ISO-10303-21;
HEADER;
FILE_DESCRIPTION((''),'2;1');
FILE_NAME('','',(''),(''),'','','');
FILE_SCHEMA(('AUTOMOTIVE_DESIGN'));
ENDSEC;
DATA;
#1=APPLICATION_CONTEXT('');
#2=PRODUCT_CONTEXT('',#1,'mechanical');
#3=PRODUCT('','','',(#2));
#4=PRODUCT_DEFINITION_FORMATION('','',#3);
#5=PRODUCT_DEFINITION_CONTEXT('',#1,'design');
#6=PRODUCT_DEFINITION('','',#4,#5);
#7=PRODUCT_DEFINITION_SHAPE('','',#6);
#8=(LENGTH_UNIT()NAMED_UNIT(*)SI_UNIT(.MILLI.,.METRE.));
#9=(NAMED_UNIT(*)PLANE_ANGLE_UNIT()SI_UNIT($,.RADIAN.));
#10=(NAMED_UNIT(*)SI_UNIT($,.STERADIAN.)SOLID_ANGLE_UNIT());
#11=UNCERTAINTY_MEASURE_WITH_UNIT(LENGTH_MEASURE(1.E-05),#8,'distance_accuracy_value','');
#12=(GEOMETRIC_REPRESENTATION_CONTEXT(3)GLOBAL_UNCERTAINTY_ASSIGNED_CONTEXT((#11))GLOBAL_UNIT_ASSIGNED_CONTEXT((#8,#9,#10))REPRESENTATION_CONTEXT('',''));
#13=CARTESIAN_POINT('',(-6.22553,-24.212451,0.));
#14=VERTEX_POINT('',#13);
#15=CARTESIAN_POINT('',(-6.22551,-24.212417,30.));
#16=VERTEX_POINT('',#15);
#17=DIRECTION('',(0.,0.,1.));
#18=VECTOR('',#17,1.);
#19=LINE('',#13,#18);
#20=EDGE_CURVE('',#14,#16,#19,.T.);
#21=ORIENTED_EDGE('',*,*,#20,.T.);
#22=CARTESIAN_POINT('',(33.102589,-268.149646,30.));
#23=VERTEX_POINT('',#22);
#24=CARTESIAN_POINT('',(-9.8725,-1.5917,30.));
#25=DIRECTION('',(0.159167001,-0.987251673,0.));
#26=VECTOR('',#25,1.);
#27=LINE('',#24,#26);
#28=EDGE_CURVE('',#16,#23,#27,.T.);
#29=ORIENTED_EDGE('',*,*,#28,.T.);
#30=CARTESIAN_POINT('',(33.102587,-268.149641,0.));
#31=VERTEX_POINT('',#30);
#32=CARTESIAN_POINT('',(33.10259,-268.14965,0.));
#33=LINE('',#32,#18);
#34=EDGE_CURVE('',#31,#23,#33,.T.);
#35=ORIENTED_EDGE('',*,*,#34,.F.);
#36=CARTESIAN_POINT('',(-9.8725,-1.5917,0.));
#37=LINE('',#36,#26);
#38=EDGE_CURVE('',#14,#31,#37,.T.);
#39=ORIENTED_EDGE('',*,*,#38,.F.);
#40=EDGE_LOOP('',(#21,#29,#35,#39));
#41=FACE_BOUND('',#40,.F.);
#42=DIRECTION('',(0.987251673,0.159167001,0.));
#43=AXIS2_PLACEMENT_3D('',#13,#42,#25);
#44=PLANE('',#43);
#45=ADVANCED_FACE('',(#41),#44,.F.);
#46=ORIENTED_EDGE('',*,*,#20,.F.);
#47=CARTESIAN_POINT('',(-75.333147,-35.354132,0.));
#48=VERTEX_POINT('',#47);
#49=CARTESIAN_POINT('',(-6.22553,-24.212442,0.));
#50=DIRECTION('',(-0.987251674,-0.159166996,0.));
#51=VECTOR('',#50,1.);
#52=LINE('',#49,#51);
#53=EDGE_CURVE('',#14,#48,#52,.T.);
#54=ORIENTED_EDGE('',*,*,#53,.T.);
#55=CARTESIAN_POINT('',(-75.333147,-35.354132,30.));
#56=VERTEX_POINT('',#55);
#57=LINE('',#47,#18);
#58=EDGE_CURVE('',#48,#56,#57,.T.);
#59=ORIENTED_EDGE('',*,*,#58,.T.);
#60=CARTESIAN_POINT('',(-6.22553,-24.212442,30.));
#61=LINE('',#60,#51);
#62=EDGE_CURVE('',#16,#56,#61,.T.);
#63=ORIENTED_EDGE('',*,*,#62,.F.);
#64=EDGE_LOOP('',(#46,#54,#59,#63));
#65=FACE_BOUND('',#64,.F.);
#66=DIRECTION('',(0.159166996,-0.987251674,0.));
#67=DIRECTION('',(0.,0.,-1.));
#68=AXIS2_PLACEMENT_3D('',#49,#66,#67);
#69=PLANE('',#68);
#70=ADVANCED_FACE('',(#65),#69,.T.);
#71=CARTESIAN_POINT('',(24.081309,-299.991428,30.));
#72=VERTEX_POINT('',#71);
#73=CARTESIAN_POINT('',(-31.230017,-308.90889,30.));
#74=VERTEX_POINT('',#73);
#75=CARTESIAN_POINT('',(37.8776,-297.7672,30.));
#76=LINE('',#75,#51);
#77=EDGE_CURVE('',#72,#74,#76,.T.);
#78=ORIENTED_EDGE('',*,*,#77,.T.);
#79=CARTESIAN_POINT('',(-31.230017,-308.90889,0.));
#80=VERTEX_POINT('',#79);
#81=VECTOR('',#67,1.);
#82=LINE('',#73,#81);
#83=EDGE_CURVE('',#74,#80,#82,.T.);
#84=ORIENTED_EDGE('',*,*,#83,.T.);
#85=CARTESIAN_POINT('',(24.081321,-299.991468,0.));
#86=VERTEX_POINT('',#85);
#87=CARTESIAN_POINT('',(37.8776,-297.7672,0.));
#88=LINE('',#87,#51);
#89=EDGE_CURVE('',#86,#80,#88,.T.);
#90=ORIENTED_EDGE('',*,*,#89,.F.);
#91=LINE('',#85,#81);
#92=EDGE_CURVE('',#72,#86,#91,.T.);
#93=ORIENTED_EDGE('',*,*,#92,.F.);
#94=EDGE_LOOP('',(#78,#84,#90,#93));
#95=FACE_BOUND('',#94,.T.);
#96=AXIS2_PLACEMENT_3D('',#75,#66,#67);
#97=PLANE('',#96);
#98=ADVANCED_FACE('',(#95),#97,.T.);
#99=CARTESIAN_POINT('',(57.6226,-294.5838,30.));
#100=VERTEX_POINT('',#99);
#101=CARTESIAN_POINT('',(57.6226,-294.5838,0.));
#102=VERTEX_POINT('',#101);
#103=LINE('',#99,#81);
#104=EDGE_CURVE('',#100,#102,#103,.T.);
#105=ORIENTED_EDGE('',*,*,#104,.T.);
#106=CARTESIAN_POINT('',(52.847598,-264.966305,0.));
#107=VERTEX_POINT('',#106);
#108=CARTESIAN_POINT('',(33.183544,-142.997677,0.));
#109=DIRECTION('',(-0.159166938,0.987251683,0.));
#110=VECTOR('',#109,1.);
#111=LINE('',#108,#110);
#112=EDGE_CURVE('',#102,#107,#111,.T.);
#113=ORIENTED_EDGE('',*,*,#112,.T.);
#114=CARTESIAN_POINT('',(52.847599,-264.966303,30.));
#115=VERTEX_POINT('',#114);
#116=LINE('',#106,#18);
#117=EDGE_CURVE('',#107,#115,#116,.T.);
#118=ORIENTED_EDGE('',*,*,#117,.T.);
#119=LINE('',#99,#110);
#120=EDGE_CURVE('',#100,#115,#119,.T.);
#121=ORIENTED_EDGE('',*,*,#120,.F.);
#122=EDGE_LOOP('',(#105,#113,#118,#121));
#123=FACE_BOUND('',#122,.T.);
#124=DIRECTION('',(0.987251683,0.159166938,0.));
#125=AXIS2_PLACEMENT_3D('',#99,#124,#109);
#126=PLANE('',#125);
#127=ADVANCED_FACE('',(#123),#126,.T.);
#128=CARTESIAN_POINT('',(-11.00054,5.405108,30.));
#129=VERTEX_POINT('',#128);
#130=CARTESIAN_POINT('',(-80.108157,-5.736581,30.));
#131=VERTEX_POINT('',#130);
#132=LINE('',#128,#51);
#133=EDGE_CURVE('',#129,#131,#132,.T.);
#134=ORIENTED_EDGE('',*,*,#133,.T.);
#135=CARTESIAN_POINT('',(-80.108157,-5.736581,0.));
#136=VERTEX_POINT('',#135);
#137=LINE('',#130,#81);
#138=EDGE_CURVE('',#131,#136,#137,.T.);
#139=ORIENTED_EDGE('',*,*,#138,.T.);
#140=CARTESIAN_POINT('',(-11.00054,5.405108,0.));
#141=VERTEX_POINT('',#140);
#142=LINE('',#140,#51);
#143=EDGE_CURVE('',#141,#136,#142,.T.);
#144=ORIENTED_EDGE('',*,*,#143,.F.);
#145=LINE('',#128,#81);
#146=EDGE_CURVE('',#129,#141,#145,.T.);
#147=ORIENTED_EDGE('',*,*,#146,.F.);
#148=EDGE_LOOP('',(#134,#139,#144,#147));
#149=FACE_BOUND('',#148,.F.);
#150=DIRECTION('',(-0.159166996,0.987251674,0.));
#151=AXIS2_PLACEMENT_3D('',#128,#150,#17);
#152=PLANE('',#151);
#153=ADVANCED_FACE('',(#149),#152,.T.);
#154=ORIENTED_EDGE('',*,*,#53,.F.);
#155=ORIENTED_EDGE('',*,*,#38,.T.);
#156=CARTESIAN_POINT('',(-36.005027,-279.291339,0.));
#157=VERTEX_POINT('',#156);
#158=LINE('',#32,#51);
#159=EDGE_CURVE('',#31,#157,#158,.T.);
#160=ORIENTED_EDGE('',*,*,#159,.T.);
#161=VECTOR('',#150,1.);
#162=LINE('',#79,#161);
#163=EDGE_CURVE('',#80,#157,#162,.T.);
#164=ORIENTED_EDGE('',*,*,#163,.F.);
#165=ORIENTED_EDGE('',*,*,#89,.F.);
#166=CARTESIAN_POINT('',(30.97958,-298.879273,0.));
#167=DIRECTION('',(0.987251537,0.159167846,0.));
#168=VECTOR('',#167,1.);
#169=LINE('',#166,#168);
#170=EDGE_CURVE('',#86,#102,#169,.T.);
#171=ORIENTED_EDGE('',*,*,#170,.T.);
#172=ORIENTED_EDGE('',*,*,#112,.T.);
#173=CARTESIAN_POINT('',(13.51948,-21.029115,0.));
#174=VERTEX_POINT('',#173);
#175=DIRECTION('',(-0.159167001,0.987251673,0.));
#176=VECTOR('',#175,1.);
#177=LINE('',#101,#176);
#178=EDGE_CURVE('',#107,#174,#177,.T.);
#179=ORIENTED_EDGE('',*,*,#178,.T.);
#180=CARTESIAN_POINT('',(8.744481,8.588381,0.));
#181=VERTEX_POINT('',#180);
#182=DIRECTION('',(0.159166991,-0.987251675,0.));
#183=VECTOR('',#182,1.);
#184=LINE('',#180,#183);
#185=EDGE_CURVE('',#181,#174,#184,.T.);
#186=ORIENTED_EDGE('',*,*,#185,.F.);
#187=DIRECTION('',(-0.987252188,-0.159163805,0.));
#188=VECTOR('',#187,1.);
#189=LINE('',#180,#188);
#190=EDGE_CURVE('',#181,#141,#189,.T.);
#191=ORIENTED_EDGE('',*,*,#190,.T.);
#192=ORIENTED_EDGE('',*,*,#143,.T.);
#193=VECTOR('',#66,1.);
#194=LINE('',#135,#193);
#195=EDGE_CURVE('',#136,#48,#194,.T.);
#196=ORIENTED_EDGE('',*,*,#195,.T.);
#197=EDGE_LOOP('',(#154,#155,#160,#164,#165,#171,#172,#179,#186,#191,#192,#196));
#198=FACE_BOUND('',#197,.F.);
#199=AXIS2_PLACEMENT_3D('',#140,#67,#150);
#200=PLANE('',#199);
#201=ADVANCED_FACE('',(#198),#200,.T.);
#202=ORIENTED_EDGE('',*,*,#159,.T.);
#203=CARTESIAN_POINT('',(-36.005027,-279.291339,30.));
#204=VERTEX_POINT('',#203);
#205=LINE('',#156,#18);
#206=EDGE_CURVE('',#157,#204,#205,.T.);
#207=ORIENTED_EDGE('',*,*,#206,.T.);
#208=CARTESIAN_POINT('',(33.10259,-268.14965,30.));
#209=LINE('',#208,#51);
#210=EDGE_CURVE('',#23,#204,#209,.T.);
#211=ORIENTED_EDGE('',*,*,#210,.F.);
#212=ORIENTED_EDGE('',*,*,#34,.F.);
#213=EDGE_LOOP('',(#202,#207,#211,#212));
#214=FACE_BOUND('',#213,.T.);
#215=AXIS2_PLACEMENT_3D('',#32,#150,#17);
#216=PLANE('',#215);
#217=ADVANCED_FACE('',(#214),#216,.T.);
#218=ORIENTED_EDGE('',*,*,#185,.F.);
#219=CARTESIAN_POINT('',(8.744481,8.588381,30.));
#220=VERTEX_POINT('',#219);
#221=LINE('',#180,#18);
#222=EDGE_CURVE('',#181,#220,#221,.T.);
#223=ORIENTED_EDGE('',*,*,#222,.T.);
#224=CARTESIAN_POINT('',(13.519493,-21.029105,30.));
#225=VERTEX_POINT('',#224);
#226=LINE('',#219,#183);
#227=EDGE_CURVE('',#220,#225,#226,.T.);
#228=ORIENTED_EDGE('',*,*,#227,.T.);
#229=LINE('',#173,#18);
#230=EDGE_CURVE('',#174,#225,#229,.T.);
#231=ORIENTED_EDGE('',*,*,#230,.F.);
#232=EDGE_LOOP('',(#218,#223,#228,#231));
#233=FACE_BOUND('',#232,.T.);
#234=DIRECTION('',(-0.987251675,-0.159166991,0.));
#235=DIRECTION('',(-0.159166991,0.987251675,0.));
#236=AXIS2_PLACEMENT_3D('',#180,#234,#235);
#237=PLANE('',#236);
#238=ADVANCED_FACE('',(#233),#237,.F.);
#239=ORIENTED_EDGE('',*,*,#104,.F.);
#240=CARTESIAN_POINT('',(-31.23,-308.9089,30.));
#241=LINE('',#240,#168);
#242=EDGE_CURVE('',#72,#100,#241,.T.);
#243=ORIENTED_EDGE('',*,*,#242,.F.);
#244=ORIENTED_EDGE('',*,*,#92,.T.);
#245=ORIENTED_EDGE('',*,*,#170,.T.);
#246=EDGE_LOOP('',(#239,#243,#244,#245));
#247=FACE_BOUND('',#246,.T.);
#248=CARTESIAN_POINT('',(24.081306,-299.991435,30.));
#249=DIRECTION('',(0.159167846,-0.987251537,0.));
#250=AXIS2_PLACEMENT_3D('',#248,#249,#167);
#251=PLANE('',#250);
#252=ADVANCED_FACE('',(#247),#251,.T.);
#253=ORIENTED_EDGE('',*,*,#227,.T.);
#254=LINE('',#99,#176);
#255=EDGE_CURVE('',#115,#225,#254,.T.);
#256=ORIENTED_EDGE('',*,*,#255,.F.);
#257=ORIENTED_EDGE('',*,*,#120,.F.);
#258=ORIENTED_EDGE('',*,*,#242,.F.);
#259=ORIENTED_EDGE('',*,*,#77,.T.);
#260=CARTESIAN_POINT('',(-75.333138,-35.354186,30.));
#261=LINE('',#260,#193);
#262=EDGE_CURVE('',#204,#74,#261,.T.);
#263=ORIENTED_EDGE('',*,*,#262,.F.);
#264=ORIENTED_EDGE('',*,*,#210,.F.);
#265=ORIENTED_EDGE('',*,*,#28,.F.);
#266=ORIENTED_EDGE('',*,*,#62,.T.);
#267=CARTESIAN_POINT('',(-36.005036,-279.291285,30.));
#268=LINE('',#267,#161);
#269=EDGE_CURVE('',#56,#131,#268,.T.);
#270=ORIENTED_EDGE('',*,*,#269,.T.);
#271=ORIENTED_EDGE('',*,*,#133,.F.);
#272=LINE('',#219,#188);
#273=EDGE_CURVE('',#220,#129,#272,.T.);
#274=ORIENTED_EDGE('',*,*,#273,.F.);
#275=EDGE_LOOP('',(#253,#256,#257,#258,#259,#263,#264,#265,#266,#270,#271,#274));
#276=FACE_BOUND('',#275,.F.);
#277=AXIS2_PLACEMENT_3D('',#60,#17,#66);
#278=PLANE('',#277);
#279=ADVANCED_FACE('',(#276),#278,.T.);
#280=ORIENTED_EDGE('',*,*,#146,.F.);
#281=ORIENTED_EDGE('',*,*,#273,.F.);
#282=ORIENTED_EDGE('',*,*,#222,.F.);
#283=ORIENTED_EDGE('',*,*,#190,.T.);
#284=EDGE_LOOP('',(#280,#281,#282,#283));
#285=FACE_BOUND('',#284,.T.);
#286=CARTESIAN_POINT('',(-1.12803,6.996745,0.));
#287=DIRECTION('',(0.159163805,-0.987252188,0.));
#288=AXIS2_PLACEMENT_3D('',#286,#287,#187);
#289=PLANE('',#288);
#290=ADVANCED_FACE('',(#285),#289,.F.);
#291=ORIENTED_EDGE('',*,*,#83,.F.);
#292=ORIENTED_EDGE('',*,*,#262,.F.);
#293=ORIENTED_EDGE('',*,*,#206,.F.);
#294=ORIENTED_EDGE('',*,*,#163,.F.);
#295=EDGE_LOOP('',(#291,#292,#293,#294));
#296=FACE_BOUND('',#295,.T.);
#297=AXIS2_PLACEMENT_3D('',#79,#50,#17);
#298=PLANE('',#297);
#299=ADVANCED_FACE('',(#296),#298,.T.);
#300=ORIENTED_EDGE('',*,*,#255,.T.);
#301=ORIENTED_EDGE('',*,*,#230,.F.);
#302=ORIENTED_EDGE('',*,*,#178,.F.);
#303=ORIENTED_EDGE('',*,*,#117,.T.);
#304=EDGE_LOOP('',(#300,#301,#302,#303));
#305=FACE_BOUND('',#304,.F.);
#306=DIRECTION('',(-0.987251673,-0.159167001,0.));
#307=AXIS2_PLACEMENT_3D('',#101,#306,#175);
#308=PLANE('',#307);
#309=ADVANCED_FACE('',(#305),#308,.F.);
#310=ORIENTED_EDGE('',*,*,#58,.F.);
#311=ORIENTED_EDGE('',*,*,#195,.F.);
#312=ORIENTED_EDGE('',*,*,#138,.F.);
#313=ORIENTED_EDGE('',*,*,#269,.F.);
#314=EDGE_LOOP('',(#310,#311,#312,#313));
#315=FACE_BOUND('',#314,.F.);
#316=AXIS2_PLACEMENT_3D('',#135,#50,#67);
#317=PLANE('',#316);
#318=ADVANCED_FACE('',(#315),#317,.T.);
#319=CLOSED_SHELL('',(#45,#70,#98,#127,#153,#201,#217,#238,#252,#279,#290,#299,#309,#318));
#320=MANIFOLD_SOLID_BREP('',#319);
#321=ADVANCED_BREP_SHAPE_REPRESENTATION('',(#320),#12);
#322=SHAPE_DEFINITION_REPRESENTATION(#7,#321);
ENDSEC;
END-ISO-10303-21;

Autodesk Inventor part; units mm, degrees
ref_plane "YZ Plane" through (0, 0, 0) normal (1, 0, 0) x (0, 1, 0)
ref_plane "XZ Plane" through (0, 0, 0) normal (0, 1, 0) x (-1, 0, 0)
ref_plane "XY Plane" through (0, 0, 0) normal (0, 0, 1) x (1, 0, 0)
sketch "Sketch1" plane through (0, 0, 0) normal (0, 0, 1) x (1, 0, 0)
  arc A0 (5.5018, -3.1706) -> (4.1426, 4.8126) centre (0, 0) ccw projected
  line L0 (-0.2789, 17.1872) -> (4.1426, 4.8126) projected
  arc A1 (-0.2789, 17.1872) -> (-5.4243, 16.3111) centre (-2.7743, 16.2955) ccw projected
  line L1 (-5.5018, 3.1706) -> (-5.4243, 16.3111) projected
  arc A2 (-5.5018, 3.1706) -> (-4.1426, -4.8126) centre (0, 0) ccw projected
  line L2 (-4.1426, -4.8126) -> (0.2789, -17.1872) projected
  arc A3 (0.2789, -17.1872) -> (5.4243, -16.3111) centre (2.7743, -16.2955) ccw projected
  line L3 (5.4243, -16.3111) -> (5.5018, -3.1706) projected
  circle A4 centre (1.7673, -10.3806) radius 0.5 projected
  circle A5 centre (1.2638, -7.4232) radius 0.5 projected
  circle A6 centre (0, 0) radius 4.375 projected
  circle A7 centre (-2.2708, 13.3381) radius 0.5 projected
  circle A8 centre (-1.7673, 10.3806) radius 0.5 projected
  circle A9 centre (-1.2638, 7.4232) radius 0.5 projected
  circle A10 centre (-2.7743, 16.2955) radius 0.5 projected
  circle A11 centre (2.2708, -13.3381) radius 0.5 projected
  circle A12 centre (2.7743, -16.2955) radius 0.5 projected
  line L4 (0, 0) -> (2.7743, -16.2955)
  line L5 (0, 0) -> (47.7501, -296.1755)
  line L6 (0, 0) -> (23.8751, -148.0877)
  line L7 (-9.8725, -1.5917) -> (37.8776, -297.7672)
  line L8 (37.8776, -297.7672) -> (57.6226, -294.5838)
  line L9 (57.6226, -294.5838) -> (9.8725, 1.5917)
  line L10 (9.8725, 1.5917) -> (-9.8725, -1.5917)
  line L11 (-9.8725, -1.5917) -> (57.6226, -294.5838) construction
  line L12 (37.8776, -297.7672) -> (9.8725, 1.5917) construction
  circle A13 centre (0, 0) radius 25
  point P0 (13.5195, -21.0291)
  point P1 (-6.2255, -24.2124)
  dimension "d0" = 300
  dimension "d1" = 150
  dimension "d2" = 20
  dimension "d3" = 50
extrude "Extrusion1" add sketch "Sketch1" along normal blind 30 contours L3 A3 L5 A12 L4 A11 A4 A5 A6 L10 A0 | A0 L10 L9 A13 L5 A3 L3 | L10 A6 A2 L1 A1 L0 A0 | A0 L0 A1 L1 A2 L10 L7 A13 L9 | L10 A6 | A6 L4 L10 | L5 A13 L7 L10 A2 L2 A3 | A3 L2 A2 L10 A6 L5 A5 A4 A11 A12 | L9 L8 L5 A13 | L10 L5 A6 | L4 A6 L5 | L5 A12 | A12 L5 | L5 L8 L7 A13 | L4 A5 L5 A6 | L5 A11 L4 A12 | L4 A5 L5 | A5 L4 | L5 A5 | L5 A11 L4 | A11 L5 | L4 A4 L5 A5 | L4 A11 | L5 A4 L4 A11 | L4 A4 L5 | A4 L4 | L5 A4 | A7 | A8 | A9 | A10
sketch "Sketch2" plane through (37.8776, -297.7672, 0) normal (-0.9872517, -0.159167, 0) x (0, 0, 1)
  line L0 (30, 277.0871) -> (30, 0) projected
  line L1 (30, 0) -> (0, 0)
  line L2 (0, 0) -> (0, 30)
  line L3 (0, 30) -> (30, 30)
  line L4 (30, 30) -> (30, 0)
  point P0 (0, 300)
  point P1 (30, 30)
  dimension "d6" = 30
  dimension "d7" = 30
extrude "Extrusion2" add sketch "Sketch2" along normal blind 70
sketch "Sketch4" plane through (0, 0, 30) normal (0, 0, 1) x (1, 0, 0)
  line L0 (-6.2255, -24.2124) -> (33.1026, -268.1496) projected
  line L1 (33.1026, -268.1496) -> (-36.005, -279.2913) projected
  line L2 (-31.23, -308.9089) -> (-36.005, -279.2913) projected
  line L3 (57.6226, -294.5838) -> (-31.23, -308.9089) projected
  line L4 (57.6226, -294.5838) -> (13.5195, -21.0291) projected
  arc A0 (13.5195, -21.0291) -> (-6.2255, -24.2124) centre (0, 0) ccw projected
  arc A1 (13.5195, -21.0291) -> (-6.2255, -24.2124) centre (0, 0) ccw projected
  circle A2 centre (0, 0) radius 25
  point P0 (13.5195, -21.0291)
extrude "Extrusion4" cut sketch "Sketch4" against normal through all contours A0 A2
sketch "Sketch5" plane through (0, 0, 30) normal (0, 0, 1) x (1, 0, 0)
  arc A0 (-6.2255, -24.2124) -> (13.5195, -21.0291) centre (0, 0) ccw projected
  line L0 (-6.2255, -24.2124) -> (33.1026, -268.1496) projected
  line L1 (33.1026, -268.1496) -> (-36.005, -279.2913) projected
  line L2 (-31.23, -308.9089) -> (-36.005, -279.2913) projected
  line L3 (57.6226, -294.5838) -> (-31.23, -308.9089) projected
  line L4 (57.6226, -294.5838) -> (13.5195, -21.0291) projected
  line L5 (-6.2255, -24.2124) -> (33.1026, -268.1496) projected
  line L6 (-6.2255, -24.2124) -> (13.5195, -21.0291)
extrude "Extrusion5" add sketch "Sketch5" against normal up to surface (30 mm away) contours L6 A0
ref_plane "Work Plane2" through (33.1836, -142.9977, 0) normal (0.159167, -0.9872517, 0) x (0.9872517, 0.159167, 0)
ref_plane "Work Plane1" through (52.8476, -264.9663, 0) normal (0.159167, -0.9872517, 0) x (0.9872517, 0.159167, 0)
mirror "Mirror1" about plane through (33.1836, -142.9977, 0) normal (0.159167, -0.9872517, 0) of "Extrusion2"
mirror "Mirror2" about plane through (33.1836, -142.9977, 0) normal (0.159167, -0.9872517, 0) of "Extrusion1"
sketch "Sketch6" plane through (0, 0, 30) normal (0, 0, 1) x (1, 0, 0)
  line L0 (33.1026, -268.1496) -> (-36.005, -279.2913) projected
  line L1 (-31.23, -308.9089) -> (-36.005, -279.2913) projected
  line L2 (24.0813, -299.9914) -> (-31.23, -308.9089) projected
  arc A0 (24.0813, -299.9914) -> (52.8476, -264.9663) centre (46.6221, -289.1787) ccw projected
  line L3 (52.8476, -264.9663) -> (8.7445, 8.5884) projected
  line L4 (-80.1082, -5.7366) -> (8.7445, 8.5884) projected
  line L5 (-80.1082, -5.7366) -> (-75.3332, -35.3541) projected
  line L6 (-6.2255, -24.2124) -> (-75.3332, -35.3541) projected
  line L7 (-6.2255, -24.2124) -> (33.1026, -268.1496) projected
  line L8 (-36.005, -279.2913) -> (-31.23, -308.9089) projected
  line L9 (-36.005, -279.2913) -> (52.8476, -264.9663)
  line L10 (24.0813, -299.9914) -> (-31.23, -308.9089) projected
  line L11 (-31.23, -308.9089) -> (57.6226, -294.5838)
  line L12 (57.6226, -294.5838) -> (52.8476, -264.9663)
  point P0 (0, 0)
extrude "Extrusion6" cut sketch "Sketch6" against normal through all contours A0 L11 L12
sketch "Sketch7" plane through (0, 0, 30) normal (0, 0, 1) x (1, 0, 0)
  point P0 (0, 0)
sketch "Sketch8" plane through (0, 0, 30) normal (0, 0, 1) x (1, 0, 0)
  line L0 (-31.23, -308.9089) -> (-36.005, -279.2913) projected
  line L1 (-6.2255, -24.2124) -> (33.1026, -268.1496) projected
  line L2 (-36.005, -279.2913) -> (33.1026, -268.1496)
  point P0 (0, 0)
properties part number "arm" material "PET Plastic"
